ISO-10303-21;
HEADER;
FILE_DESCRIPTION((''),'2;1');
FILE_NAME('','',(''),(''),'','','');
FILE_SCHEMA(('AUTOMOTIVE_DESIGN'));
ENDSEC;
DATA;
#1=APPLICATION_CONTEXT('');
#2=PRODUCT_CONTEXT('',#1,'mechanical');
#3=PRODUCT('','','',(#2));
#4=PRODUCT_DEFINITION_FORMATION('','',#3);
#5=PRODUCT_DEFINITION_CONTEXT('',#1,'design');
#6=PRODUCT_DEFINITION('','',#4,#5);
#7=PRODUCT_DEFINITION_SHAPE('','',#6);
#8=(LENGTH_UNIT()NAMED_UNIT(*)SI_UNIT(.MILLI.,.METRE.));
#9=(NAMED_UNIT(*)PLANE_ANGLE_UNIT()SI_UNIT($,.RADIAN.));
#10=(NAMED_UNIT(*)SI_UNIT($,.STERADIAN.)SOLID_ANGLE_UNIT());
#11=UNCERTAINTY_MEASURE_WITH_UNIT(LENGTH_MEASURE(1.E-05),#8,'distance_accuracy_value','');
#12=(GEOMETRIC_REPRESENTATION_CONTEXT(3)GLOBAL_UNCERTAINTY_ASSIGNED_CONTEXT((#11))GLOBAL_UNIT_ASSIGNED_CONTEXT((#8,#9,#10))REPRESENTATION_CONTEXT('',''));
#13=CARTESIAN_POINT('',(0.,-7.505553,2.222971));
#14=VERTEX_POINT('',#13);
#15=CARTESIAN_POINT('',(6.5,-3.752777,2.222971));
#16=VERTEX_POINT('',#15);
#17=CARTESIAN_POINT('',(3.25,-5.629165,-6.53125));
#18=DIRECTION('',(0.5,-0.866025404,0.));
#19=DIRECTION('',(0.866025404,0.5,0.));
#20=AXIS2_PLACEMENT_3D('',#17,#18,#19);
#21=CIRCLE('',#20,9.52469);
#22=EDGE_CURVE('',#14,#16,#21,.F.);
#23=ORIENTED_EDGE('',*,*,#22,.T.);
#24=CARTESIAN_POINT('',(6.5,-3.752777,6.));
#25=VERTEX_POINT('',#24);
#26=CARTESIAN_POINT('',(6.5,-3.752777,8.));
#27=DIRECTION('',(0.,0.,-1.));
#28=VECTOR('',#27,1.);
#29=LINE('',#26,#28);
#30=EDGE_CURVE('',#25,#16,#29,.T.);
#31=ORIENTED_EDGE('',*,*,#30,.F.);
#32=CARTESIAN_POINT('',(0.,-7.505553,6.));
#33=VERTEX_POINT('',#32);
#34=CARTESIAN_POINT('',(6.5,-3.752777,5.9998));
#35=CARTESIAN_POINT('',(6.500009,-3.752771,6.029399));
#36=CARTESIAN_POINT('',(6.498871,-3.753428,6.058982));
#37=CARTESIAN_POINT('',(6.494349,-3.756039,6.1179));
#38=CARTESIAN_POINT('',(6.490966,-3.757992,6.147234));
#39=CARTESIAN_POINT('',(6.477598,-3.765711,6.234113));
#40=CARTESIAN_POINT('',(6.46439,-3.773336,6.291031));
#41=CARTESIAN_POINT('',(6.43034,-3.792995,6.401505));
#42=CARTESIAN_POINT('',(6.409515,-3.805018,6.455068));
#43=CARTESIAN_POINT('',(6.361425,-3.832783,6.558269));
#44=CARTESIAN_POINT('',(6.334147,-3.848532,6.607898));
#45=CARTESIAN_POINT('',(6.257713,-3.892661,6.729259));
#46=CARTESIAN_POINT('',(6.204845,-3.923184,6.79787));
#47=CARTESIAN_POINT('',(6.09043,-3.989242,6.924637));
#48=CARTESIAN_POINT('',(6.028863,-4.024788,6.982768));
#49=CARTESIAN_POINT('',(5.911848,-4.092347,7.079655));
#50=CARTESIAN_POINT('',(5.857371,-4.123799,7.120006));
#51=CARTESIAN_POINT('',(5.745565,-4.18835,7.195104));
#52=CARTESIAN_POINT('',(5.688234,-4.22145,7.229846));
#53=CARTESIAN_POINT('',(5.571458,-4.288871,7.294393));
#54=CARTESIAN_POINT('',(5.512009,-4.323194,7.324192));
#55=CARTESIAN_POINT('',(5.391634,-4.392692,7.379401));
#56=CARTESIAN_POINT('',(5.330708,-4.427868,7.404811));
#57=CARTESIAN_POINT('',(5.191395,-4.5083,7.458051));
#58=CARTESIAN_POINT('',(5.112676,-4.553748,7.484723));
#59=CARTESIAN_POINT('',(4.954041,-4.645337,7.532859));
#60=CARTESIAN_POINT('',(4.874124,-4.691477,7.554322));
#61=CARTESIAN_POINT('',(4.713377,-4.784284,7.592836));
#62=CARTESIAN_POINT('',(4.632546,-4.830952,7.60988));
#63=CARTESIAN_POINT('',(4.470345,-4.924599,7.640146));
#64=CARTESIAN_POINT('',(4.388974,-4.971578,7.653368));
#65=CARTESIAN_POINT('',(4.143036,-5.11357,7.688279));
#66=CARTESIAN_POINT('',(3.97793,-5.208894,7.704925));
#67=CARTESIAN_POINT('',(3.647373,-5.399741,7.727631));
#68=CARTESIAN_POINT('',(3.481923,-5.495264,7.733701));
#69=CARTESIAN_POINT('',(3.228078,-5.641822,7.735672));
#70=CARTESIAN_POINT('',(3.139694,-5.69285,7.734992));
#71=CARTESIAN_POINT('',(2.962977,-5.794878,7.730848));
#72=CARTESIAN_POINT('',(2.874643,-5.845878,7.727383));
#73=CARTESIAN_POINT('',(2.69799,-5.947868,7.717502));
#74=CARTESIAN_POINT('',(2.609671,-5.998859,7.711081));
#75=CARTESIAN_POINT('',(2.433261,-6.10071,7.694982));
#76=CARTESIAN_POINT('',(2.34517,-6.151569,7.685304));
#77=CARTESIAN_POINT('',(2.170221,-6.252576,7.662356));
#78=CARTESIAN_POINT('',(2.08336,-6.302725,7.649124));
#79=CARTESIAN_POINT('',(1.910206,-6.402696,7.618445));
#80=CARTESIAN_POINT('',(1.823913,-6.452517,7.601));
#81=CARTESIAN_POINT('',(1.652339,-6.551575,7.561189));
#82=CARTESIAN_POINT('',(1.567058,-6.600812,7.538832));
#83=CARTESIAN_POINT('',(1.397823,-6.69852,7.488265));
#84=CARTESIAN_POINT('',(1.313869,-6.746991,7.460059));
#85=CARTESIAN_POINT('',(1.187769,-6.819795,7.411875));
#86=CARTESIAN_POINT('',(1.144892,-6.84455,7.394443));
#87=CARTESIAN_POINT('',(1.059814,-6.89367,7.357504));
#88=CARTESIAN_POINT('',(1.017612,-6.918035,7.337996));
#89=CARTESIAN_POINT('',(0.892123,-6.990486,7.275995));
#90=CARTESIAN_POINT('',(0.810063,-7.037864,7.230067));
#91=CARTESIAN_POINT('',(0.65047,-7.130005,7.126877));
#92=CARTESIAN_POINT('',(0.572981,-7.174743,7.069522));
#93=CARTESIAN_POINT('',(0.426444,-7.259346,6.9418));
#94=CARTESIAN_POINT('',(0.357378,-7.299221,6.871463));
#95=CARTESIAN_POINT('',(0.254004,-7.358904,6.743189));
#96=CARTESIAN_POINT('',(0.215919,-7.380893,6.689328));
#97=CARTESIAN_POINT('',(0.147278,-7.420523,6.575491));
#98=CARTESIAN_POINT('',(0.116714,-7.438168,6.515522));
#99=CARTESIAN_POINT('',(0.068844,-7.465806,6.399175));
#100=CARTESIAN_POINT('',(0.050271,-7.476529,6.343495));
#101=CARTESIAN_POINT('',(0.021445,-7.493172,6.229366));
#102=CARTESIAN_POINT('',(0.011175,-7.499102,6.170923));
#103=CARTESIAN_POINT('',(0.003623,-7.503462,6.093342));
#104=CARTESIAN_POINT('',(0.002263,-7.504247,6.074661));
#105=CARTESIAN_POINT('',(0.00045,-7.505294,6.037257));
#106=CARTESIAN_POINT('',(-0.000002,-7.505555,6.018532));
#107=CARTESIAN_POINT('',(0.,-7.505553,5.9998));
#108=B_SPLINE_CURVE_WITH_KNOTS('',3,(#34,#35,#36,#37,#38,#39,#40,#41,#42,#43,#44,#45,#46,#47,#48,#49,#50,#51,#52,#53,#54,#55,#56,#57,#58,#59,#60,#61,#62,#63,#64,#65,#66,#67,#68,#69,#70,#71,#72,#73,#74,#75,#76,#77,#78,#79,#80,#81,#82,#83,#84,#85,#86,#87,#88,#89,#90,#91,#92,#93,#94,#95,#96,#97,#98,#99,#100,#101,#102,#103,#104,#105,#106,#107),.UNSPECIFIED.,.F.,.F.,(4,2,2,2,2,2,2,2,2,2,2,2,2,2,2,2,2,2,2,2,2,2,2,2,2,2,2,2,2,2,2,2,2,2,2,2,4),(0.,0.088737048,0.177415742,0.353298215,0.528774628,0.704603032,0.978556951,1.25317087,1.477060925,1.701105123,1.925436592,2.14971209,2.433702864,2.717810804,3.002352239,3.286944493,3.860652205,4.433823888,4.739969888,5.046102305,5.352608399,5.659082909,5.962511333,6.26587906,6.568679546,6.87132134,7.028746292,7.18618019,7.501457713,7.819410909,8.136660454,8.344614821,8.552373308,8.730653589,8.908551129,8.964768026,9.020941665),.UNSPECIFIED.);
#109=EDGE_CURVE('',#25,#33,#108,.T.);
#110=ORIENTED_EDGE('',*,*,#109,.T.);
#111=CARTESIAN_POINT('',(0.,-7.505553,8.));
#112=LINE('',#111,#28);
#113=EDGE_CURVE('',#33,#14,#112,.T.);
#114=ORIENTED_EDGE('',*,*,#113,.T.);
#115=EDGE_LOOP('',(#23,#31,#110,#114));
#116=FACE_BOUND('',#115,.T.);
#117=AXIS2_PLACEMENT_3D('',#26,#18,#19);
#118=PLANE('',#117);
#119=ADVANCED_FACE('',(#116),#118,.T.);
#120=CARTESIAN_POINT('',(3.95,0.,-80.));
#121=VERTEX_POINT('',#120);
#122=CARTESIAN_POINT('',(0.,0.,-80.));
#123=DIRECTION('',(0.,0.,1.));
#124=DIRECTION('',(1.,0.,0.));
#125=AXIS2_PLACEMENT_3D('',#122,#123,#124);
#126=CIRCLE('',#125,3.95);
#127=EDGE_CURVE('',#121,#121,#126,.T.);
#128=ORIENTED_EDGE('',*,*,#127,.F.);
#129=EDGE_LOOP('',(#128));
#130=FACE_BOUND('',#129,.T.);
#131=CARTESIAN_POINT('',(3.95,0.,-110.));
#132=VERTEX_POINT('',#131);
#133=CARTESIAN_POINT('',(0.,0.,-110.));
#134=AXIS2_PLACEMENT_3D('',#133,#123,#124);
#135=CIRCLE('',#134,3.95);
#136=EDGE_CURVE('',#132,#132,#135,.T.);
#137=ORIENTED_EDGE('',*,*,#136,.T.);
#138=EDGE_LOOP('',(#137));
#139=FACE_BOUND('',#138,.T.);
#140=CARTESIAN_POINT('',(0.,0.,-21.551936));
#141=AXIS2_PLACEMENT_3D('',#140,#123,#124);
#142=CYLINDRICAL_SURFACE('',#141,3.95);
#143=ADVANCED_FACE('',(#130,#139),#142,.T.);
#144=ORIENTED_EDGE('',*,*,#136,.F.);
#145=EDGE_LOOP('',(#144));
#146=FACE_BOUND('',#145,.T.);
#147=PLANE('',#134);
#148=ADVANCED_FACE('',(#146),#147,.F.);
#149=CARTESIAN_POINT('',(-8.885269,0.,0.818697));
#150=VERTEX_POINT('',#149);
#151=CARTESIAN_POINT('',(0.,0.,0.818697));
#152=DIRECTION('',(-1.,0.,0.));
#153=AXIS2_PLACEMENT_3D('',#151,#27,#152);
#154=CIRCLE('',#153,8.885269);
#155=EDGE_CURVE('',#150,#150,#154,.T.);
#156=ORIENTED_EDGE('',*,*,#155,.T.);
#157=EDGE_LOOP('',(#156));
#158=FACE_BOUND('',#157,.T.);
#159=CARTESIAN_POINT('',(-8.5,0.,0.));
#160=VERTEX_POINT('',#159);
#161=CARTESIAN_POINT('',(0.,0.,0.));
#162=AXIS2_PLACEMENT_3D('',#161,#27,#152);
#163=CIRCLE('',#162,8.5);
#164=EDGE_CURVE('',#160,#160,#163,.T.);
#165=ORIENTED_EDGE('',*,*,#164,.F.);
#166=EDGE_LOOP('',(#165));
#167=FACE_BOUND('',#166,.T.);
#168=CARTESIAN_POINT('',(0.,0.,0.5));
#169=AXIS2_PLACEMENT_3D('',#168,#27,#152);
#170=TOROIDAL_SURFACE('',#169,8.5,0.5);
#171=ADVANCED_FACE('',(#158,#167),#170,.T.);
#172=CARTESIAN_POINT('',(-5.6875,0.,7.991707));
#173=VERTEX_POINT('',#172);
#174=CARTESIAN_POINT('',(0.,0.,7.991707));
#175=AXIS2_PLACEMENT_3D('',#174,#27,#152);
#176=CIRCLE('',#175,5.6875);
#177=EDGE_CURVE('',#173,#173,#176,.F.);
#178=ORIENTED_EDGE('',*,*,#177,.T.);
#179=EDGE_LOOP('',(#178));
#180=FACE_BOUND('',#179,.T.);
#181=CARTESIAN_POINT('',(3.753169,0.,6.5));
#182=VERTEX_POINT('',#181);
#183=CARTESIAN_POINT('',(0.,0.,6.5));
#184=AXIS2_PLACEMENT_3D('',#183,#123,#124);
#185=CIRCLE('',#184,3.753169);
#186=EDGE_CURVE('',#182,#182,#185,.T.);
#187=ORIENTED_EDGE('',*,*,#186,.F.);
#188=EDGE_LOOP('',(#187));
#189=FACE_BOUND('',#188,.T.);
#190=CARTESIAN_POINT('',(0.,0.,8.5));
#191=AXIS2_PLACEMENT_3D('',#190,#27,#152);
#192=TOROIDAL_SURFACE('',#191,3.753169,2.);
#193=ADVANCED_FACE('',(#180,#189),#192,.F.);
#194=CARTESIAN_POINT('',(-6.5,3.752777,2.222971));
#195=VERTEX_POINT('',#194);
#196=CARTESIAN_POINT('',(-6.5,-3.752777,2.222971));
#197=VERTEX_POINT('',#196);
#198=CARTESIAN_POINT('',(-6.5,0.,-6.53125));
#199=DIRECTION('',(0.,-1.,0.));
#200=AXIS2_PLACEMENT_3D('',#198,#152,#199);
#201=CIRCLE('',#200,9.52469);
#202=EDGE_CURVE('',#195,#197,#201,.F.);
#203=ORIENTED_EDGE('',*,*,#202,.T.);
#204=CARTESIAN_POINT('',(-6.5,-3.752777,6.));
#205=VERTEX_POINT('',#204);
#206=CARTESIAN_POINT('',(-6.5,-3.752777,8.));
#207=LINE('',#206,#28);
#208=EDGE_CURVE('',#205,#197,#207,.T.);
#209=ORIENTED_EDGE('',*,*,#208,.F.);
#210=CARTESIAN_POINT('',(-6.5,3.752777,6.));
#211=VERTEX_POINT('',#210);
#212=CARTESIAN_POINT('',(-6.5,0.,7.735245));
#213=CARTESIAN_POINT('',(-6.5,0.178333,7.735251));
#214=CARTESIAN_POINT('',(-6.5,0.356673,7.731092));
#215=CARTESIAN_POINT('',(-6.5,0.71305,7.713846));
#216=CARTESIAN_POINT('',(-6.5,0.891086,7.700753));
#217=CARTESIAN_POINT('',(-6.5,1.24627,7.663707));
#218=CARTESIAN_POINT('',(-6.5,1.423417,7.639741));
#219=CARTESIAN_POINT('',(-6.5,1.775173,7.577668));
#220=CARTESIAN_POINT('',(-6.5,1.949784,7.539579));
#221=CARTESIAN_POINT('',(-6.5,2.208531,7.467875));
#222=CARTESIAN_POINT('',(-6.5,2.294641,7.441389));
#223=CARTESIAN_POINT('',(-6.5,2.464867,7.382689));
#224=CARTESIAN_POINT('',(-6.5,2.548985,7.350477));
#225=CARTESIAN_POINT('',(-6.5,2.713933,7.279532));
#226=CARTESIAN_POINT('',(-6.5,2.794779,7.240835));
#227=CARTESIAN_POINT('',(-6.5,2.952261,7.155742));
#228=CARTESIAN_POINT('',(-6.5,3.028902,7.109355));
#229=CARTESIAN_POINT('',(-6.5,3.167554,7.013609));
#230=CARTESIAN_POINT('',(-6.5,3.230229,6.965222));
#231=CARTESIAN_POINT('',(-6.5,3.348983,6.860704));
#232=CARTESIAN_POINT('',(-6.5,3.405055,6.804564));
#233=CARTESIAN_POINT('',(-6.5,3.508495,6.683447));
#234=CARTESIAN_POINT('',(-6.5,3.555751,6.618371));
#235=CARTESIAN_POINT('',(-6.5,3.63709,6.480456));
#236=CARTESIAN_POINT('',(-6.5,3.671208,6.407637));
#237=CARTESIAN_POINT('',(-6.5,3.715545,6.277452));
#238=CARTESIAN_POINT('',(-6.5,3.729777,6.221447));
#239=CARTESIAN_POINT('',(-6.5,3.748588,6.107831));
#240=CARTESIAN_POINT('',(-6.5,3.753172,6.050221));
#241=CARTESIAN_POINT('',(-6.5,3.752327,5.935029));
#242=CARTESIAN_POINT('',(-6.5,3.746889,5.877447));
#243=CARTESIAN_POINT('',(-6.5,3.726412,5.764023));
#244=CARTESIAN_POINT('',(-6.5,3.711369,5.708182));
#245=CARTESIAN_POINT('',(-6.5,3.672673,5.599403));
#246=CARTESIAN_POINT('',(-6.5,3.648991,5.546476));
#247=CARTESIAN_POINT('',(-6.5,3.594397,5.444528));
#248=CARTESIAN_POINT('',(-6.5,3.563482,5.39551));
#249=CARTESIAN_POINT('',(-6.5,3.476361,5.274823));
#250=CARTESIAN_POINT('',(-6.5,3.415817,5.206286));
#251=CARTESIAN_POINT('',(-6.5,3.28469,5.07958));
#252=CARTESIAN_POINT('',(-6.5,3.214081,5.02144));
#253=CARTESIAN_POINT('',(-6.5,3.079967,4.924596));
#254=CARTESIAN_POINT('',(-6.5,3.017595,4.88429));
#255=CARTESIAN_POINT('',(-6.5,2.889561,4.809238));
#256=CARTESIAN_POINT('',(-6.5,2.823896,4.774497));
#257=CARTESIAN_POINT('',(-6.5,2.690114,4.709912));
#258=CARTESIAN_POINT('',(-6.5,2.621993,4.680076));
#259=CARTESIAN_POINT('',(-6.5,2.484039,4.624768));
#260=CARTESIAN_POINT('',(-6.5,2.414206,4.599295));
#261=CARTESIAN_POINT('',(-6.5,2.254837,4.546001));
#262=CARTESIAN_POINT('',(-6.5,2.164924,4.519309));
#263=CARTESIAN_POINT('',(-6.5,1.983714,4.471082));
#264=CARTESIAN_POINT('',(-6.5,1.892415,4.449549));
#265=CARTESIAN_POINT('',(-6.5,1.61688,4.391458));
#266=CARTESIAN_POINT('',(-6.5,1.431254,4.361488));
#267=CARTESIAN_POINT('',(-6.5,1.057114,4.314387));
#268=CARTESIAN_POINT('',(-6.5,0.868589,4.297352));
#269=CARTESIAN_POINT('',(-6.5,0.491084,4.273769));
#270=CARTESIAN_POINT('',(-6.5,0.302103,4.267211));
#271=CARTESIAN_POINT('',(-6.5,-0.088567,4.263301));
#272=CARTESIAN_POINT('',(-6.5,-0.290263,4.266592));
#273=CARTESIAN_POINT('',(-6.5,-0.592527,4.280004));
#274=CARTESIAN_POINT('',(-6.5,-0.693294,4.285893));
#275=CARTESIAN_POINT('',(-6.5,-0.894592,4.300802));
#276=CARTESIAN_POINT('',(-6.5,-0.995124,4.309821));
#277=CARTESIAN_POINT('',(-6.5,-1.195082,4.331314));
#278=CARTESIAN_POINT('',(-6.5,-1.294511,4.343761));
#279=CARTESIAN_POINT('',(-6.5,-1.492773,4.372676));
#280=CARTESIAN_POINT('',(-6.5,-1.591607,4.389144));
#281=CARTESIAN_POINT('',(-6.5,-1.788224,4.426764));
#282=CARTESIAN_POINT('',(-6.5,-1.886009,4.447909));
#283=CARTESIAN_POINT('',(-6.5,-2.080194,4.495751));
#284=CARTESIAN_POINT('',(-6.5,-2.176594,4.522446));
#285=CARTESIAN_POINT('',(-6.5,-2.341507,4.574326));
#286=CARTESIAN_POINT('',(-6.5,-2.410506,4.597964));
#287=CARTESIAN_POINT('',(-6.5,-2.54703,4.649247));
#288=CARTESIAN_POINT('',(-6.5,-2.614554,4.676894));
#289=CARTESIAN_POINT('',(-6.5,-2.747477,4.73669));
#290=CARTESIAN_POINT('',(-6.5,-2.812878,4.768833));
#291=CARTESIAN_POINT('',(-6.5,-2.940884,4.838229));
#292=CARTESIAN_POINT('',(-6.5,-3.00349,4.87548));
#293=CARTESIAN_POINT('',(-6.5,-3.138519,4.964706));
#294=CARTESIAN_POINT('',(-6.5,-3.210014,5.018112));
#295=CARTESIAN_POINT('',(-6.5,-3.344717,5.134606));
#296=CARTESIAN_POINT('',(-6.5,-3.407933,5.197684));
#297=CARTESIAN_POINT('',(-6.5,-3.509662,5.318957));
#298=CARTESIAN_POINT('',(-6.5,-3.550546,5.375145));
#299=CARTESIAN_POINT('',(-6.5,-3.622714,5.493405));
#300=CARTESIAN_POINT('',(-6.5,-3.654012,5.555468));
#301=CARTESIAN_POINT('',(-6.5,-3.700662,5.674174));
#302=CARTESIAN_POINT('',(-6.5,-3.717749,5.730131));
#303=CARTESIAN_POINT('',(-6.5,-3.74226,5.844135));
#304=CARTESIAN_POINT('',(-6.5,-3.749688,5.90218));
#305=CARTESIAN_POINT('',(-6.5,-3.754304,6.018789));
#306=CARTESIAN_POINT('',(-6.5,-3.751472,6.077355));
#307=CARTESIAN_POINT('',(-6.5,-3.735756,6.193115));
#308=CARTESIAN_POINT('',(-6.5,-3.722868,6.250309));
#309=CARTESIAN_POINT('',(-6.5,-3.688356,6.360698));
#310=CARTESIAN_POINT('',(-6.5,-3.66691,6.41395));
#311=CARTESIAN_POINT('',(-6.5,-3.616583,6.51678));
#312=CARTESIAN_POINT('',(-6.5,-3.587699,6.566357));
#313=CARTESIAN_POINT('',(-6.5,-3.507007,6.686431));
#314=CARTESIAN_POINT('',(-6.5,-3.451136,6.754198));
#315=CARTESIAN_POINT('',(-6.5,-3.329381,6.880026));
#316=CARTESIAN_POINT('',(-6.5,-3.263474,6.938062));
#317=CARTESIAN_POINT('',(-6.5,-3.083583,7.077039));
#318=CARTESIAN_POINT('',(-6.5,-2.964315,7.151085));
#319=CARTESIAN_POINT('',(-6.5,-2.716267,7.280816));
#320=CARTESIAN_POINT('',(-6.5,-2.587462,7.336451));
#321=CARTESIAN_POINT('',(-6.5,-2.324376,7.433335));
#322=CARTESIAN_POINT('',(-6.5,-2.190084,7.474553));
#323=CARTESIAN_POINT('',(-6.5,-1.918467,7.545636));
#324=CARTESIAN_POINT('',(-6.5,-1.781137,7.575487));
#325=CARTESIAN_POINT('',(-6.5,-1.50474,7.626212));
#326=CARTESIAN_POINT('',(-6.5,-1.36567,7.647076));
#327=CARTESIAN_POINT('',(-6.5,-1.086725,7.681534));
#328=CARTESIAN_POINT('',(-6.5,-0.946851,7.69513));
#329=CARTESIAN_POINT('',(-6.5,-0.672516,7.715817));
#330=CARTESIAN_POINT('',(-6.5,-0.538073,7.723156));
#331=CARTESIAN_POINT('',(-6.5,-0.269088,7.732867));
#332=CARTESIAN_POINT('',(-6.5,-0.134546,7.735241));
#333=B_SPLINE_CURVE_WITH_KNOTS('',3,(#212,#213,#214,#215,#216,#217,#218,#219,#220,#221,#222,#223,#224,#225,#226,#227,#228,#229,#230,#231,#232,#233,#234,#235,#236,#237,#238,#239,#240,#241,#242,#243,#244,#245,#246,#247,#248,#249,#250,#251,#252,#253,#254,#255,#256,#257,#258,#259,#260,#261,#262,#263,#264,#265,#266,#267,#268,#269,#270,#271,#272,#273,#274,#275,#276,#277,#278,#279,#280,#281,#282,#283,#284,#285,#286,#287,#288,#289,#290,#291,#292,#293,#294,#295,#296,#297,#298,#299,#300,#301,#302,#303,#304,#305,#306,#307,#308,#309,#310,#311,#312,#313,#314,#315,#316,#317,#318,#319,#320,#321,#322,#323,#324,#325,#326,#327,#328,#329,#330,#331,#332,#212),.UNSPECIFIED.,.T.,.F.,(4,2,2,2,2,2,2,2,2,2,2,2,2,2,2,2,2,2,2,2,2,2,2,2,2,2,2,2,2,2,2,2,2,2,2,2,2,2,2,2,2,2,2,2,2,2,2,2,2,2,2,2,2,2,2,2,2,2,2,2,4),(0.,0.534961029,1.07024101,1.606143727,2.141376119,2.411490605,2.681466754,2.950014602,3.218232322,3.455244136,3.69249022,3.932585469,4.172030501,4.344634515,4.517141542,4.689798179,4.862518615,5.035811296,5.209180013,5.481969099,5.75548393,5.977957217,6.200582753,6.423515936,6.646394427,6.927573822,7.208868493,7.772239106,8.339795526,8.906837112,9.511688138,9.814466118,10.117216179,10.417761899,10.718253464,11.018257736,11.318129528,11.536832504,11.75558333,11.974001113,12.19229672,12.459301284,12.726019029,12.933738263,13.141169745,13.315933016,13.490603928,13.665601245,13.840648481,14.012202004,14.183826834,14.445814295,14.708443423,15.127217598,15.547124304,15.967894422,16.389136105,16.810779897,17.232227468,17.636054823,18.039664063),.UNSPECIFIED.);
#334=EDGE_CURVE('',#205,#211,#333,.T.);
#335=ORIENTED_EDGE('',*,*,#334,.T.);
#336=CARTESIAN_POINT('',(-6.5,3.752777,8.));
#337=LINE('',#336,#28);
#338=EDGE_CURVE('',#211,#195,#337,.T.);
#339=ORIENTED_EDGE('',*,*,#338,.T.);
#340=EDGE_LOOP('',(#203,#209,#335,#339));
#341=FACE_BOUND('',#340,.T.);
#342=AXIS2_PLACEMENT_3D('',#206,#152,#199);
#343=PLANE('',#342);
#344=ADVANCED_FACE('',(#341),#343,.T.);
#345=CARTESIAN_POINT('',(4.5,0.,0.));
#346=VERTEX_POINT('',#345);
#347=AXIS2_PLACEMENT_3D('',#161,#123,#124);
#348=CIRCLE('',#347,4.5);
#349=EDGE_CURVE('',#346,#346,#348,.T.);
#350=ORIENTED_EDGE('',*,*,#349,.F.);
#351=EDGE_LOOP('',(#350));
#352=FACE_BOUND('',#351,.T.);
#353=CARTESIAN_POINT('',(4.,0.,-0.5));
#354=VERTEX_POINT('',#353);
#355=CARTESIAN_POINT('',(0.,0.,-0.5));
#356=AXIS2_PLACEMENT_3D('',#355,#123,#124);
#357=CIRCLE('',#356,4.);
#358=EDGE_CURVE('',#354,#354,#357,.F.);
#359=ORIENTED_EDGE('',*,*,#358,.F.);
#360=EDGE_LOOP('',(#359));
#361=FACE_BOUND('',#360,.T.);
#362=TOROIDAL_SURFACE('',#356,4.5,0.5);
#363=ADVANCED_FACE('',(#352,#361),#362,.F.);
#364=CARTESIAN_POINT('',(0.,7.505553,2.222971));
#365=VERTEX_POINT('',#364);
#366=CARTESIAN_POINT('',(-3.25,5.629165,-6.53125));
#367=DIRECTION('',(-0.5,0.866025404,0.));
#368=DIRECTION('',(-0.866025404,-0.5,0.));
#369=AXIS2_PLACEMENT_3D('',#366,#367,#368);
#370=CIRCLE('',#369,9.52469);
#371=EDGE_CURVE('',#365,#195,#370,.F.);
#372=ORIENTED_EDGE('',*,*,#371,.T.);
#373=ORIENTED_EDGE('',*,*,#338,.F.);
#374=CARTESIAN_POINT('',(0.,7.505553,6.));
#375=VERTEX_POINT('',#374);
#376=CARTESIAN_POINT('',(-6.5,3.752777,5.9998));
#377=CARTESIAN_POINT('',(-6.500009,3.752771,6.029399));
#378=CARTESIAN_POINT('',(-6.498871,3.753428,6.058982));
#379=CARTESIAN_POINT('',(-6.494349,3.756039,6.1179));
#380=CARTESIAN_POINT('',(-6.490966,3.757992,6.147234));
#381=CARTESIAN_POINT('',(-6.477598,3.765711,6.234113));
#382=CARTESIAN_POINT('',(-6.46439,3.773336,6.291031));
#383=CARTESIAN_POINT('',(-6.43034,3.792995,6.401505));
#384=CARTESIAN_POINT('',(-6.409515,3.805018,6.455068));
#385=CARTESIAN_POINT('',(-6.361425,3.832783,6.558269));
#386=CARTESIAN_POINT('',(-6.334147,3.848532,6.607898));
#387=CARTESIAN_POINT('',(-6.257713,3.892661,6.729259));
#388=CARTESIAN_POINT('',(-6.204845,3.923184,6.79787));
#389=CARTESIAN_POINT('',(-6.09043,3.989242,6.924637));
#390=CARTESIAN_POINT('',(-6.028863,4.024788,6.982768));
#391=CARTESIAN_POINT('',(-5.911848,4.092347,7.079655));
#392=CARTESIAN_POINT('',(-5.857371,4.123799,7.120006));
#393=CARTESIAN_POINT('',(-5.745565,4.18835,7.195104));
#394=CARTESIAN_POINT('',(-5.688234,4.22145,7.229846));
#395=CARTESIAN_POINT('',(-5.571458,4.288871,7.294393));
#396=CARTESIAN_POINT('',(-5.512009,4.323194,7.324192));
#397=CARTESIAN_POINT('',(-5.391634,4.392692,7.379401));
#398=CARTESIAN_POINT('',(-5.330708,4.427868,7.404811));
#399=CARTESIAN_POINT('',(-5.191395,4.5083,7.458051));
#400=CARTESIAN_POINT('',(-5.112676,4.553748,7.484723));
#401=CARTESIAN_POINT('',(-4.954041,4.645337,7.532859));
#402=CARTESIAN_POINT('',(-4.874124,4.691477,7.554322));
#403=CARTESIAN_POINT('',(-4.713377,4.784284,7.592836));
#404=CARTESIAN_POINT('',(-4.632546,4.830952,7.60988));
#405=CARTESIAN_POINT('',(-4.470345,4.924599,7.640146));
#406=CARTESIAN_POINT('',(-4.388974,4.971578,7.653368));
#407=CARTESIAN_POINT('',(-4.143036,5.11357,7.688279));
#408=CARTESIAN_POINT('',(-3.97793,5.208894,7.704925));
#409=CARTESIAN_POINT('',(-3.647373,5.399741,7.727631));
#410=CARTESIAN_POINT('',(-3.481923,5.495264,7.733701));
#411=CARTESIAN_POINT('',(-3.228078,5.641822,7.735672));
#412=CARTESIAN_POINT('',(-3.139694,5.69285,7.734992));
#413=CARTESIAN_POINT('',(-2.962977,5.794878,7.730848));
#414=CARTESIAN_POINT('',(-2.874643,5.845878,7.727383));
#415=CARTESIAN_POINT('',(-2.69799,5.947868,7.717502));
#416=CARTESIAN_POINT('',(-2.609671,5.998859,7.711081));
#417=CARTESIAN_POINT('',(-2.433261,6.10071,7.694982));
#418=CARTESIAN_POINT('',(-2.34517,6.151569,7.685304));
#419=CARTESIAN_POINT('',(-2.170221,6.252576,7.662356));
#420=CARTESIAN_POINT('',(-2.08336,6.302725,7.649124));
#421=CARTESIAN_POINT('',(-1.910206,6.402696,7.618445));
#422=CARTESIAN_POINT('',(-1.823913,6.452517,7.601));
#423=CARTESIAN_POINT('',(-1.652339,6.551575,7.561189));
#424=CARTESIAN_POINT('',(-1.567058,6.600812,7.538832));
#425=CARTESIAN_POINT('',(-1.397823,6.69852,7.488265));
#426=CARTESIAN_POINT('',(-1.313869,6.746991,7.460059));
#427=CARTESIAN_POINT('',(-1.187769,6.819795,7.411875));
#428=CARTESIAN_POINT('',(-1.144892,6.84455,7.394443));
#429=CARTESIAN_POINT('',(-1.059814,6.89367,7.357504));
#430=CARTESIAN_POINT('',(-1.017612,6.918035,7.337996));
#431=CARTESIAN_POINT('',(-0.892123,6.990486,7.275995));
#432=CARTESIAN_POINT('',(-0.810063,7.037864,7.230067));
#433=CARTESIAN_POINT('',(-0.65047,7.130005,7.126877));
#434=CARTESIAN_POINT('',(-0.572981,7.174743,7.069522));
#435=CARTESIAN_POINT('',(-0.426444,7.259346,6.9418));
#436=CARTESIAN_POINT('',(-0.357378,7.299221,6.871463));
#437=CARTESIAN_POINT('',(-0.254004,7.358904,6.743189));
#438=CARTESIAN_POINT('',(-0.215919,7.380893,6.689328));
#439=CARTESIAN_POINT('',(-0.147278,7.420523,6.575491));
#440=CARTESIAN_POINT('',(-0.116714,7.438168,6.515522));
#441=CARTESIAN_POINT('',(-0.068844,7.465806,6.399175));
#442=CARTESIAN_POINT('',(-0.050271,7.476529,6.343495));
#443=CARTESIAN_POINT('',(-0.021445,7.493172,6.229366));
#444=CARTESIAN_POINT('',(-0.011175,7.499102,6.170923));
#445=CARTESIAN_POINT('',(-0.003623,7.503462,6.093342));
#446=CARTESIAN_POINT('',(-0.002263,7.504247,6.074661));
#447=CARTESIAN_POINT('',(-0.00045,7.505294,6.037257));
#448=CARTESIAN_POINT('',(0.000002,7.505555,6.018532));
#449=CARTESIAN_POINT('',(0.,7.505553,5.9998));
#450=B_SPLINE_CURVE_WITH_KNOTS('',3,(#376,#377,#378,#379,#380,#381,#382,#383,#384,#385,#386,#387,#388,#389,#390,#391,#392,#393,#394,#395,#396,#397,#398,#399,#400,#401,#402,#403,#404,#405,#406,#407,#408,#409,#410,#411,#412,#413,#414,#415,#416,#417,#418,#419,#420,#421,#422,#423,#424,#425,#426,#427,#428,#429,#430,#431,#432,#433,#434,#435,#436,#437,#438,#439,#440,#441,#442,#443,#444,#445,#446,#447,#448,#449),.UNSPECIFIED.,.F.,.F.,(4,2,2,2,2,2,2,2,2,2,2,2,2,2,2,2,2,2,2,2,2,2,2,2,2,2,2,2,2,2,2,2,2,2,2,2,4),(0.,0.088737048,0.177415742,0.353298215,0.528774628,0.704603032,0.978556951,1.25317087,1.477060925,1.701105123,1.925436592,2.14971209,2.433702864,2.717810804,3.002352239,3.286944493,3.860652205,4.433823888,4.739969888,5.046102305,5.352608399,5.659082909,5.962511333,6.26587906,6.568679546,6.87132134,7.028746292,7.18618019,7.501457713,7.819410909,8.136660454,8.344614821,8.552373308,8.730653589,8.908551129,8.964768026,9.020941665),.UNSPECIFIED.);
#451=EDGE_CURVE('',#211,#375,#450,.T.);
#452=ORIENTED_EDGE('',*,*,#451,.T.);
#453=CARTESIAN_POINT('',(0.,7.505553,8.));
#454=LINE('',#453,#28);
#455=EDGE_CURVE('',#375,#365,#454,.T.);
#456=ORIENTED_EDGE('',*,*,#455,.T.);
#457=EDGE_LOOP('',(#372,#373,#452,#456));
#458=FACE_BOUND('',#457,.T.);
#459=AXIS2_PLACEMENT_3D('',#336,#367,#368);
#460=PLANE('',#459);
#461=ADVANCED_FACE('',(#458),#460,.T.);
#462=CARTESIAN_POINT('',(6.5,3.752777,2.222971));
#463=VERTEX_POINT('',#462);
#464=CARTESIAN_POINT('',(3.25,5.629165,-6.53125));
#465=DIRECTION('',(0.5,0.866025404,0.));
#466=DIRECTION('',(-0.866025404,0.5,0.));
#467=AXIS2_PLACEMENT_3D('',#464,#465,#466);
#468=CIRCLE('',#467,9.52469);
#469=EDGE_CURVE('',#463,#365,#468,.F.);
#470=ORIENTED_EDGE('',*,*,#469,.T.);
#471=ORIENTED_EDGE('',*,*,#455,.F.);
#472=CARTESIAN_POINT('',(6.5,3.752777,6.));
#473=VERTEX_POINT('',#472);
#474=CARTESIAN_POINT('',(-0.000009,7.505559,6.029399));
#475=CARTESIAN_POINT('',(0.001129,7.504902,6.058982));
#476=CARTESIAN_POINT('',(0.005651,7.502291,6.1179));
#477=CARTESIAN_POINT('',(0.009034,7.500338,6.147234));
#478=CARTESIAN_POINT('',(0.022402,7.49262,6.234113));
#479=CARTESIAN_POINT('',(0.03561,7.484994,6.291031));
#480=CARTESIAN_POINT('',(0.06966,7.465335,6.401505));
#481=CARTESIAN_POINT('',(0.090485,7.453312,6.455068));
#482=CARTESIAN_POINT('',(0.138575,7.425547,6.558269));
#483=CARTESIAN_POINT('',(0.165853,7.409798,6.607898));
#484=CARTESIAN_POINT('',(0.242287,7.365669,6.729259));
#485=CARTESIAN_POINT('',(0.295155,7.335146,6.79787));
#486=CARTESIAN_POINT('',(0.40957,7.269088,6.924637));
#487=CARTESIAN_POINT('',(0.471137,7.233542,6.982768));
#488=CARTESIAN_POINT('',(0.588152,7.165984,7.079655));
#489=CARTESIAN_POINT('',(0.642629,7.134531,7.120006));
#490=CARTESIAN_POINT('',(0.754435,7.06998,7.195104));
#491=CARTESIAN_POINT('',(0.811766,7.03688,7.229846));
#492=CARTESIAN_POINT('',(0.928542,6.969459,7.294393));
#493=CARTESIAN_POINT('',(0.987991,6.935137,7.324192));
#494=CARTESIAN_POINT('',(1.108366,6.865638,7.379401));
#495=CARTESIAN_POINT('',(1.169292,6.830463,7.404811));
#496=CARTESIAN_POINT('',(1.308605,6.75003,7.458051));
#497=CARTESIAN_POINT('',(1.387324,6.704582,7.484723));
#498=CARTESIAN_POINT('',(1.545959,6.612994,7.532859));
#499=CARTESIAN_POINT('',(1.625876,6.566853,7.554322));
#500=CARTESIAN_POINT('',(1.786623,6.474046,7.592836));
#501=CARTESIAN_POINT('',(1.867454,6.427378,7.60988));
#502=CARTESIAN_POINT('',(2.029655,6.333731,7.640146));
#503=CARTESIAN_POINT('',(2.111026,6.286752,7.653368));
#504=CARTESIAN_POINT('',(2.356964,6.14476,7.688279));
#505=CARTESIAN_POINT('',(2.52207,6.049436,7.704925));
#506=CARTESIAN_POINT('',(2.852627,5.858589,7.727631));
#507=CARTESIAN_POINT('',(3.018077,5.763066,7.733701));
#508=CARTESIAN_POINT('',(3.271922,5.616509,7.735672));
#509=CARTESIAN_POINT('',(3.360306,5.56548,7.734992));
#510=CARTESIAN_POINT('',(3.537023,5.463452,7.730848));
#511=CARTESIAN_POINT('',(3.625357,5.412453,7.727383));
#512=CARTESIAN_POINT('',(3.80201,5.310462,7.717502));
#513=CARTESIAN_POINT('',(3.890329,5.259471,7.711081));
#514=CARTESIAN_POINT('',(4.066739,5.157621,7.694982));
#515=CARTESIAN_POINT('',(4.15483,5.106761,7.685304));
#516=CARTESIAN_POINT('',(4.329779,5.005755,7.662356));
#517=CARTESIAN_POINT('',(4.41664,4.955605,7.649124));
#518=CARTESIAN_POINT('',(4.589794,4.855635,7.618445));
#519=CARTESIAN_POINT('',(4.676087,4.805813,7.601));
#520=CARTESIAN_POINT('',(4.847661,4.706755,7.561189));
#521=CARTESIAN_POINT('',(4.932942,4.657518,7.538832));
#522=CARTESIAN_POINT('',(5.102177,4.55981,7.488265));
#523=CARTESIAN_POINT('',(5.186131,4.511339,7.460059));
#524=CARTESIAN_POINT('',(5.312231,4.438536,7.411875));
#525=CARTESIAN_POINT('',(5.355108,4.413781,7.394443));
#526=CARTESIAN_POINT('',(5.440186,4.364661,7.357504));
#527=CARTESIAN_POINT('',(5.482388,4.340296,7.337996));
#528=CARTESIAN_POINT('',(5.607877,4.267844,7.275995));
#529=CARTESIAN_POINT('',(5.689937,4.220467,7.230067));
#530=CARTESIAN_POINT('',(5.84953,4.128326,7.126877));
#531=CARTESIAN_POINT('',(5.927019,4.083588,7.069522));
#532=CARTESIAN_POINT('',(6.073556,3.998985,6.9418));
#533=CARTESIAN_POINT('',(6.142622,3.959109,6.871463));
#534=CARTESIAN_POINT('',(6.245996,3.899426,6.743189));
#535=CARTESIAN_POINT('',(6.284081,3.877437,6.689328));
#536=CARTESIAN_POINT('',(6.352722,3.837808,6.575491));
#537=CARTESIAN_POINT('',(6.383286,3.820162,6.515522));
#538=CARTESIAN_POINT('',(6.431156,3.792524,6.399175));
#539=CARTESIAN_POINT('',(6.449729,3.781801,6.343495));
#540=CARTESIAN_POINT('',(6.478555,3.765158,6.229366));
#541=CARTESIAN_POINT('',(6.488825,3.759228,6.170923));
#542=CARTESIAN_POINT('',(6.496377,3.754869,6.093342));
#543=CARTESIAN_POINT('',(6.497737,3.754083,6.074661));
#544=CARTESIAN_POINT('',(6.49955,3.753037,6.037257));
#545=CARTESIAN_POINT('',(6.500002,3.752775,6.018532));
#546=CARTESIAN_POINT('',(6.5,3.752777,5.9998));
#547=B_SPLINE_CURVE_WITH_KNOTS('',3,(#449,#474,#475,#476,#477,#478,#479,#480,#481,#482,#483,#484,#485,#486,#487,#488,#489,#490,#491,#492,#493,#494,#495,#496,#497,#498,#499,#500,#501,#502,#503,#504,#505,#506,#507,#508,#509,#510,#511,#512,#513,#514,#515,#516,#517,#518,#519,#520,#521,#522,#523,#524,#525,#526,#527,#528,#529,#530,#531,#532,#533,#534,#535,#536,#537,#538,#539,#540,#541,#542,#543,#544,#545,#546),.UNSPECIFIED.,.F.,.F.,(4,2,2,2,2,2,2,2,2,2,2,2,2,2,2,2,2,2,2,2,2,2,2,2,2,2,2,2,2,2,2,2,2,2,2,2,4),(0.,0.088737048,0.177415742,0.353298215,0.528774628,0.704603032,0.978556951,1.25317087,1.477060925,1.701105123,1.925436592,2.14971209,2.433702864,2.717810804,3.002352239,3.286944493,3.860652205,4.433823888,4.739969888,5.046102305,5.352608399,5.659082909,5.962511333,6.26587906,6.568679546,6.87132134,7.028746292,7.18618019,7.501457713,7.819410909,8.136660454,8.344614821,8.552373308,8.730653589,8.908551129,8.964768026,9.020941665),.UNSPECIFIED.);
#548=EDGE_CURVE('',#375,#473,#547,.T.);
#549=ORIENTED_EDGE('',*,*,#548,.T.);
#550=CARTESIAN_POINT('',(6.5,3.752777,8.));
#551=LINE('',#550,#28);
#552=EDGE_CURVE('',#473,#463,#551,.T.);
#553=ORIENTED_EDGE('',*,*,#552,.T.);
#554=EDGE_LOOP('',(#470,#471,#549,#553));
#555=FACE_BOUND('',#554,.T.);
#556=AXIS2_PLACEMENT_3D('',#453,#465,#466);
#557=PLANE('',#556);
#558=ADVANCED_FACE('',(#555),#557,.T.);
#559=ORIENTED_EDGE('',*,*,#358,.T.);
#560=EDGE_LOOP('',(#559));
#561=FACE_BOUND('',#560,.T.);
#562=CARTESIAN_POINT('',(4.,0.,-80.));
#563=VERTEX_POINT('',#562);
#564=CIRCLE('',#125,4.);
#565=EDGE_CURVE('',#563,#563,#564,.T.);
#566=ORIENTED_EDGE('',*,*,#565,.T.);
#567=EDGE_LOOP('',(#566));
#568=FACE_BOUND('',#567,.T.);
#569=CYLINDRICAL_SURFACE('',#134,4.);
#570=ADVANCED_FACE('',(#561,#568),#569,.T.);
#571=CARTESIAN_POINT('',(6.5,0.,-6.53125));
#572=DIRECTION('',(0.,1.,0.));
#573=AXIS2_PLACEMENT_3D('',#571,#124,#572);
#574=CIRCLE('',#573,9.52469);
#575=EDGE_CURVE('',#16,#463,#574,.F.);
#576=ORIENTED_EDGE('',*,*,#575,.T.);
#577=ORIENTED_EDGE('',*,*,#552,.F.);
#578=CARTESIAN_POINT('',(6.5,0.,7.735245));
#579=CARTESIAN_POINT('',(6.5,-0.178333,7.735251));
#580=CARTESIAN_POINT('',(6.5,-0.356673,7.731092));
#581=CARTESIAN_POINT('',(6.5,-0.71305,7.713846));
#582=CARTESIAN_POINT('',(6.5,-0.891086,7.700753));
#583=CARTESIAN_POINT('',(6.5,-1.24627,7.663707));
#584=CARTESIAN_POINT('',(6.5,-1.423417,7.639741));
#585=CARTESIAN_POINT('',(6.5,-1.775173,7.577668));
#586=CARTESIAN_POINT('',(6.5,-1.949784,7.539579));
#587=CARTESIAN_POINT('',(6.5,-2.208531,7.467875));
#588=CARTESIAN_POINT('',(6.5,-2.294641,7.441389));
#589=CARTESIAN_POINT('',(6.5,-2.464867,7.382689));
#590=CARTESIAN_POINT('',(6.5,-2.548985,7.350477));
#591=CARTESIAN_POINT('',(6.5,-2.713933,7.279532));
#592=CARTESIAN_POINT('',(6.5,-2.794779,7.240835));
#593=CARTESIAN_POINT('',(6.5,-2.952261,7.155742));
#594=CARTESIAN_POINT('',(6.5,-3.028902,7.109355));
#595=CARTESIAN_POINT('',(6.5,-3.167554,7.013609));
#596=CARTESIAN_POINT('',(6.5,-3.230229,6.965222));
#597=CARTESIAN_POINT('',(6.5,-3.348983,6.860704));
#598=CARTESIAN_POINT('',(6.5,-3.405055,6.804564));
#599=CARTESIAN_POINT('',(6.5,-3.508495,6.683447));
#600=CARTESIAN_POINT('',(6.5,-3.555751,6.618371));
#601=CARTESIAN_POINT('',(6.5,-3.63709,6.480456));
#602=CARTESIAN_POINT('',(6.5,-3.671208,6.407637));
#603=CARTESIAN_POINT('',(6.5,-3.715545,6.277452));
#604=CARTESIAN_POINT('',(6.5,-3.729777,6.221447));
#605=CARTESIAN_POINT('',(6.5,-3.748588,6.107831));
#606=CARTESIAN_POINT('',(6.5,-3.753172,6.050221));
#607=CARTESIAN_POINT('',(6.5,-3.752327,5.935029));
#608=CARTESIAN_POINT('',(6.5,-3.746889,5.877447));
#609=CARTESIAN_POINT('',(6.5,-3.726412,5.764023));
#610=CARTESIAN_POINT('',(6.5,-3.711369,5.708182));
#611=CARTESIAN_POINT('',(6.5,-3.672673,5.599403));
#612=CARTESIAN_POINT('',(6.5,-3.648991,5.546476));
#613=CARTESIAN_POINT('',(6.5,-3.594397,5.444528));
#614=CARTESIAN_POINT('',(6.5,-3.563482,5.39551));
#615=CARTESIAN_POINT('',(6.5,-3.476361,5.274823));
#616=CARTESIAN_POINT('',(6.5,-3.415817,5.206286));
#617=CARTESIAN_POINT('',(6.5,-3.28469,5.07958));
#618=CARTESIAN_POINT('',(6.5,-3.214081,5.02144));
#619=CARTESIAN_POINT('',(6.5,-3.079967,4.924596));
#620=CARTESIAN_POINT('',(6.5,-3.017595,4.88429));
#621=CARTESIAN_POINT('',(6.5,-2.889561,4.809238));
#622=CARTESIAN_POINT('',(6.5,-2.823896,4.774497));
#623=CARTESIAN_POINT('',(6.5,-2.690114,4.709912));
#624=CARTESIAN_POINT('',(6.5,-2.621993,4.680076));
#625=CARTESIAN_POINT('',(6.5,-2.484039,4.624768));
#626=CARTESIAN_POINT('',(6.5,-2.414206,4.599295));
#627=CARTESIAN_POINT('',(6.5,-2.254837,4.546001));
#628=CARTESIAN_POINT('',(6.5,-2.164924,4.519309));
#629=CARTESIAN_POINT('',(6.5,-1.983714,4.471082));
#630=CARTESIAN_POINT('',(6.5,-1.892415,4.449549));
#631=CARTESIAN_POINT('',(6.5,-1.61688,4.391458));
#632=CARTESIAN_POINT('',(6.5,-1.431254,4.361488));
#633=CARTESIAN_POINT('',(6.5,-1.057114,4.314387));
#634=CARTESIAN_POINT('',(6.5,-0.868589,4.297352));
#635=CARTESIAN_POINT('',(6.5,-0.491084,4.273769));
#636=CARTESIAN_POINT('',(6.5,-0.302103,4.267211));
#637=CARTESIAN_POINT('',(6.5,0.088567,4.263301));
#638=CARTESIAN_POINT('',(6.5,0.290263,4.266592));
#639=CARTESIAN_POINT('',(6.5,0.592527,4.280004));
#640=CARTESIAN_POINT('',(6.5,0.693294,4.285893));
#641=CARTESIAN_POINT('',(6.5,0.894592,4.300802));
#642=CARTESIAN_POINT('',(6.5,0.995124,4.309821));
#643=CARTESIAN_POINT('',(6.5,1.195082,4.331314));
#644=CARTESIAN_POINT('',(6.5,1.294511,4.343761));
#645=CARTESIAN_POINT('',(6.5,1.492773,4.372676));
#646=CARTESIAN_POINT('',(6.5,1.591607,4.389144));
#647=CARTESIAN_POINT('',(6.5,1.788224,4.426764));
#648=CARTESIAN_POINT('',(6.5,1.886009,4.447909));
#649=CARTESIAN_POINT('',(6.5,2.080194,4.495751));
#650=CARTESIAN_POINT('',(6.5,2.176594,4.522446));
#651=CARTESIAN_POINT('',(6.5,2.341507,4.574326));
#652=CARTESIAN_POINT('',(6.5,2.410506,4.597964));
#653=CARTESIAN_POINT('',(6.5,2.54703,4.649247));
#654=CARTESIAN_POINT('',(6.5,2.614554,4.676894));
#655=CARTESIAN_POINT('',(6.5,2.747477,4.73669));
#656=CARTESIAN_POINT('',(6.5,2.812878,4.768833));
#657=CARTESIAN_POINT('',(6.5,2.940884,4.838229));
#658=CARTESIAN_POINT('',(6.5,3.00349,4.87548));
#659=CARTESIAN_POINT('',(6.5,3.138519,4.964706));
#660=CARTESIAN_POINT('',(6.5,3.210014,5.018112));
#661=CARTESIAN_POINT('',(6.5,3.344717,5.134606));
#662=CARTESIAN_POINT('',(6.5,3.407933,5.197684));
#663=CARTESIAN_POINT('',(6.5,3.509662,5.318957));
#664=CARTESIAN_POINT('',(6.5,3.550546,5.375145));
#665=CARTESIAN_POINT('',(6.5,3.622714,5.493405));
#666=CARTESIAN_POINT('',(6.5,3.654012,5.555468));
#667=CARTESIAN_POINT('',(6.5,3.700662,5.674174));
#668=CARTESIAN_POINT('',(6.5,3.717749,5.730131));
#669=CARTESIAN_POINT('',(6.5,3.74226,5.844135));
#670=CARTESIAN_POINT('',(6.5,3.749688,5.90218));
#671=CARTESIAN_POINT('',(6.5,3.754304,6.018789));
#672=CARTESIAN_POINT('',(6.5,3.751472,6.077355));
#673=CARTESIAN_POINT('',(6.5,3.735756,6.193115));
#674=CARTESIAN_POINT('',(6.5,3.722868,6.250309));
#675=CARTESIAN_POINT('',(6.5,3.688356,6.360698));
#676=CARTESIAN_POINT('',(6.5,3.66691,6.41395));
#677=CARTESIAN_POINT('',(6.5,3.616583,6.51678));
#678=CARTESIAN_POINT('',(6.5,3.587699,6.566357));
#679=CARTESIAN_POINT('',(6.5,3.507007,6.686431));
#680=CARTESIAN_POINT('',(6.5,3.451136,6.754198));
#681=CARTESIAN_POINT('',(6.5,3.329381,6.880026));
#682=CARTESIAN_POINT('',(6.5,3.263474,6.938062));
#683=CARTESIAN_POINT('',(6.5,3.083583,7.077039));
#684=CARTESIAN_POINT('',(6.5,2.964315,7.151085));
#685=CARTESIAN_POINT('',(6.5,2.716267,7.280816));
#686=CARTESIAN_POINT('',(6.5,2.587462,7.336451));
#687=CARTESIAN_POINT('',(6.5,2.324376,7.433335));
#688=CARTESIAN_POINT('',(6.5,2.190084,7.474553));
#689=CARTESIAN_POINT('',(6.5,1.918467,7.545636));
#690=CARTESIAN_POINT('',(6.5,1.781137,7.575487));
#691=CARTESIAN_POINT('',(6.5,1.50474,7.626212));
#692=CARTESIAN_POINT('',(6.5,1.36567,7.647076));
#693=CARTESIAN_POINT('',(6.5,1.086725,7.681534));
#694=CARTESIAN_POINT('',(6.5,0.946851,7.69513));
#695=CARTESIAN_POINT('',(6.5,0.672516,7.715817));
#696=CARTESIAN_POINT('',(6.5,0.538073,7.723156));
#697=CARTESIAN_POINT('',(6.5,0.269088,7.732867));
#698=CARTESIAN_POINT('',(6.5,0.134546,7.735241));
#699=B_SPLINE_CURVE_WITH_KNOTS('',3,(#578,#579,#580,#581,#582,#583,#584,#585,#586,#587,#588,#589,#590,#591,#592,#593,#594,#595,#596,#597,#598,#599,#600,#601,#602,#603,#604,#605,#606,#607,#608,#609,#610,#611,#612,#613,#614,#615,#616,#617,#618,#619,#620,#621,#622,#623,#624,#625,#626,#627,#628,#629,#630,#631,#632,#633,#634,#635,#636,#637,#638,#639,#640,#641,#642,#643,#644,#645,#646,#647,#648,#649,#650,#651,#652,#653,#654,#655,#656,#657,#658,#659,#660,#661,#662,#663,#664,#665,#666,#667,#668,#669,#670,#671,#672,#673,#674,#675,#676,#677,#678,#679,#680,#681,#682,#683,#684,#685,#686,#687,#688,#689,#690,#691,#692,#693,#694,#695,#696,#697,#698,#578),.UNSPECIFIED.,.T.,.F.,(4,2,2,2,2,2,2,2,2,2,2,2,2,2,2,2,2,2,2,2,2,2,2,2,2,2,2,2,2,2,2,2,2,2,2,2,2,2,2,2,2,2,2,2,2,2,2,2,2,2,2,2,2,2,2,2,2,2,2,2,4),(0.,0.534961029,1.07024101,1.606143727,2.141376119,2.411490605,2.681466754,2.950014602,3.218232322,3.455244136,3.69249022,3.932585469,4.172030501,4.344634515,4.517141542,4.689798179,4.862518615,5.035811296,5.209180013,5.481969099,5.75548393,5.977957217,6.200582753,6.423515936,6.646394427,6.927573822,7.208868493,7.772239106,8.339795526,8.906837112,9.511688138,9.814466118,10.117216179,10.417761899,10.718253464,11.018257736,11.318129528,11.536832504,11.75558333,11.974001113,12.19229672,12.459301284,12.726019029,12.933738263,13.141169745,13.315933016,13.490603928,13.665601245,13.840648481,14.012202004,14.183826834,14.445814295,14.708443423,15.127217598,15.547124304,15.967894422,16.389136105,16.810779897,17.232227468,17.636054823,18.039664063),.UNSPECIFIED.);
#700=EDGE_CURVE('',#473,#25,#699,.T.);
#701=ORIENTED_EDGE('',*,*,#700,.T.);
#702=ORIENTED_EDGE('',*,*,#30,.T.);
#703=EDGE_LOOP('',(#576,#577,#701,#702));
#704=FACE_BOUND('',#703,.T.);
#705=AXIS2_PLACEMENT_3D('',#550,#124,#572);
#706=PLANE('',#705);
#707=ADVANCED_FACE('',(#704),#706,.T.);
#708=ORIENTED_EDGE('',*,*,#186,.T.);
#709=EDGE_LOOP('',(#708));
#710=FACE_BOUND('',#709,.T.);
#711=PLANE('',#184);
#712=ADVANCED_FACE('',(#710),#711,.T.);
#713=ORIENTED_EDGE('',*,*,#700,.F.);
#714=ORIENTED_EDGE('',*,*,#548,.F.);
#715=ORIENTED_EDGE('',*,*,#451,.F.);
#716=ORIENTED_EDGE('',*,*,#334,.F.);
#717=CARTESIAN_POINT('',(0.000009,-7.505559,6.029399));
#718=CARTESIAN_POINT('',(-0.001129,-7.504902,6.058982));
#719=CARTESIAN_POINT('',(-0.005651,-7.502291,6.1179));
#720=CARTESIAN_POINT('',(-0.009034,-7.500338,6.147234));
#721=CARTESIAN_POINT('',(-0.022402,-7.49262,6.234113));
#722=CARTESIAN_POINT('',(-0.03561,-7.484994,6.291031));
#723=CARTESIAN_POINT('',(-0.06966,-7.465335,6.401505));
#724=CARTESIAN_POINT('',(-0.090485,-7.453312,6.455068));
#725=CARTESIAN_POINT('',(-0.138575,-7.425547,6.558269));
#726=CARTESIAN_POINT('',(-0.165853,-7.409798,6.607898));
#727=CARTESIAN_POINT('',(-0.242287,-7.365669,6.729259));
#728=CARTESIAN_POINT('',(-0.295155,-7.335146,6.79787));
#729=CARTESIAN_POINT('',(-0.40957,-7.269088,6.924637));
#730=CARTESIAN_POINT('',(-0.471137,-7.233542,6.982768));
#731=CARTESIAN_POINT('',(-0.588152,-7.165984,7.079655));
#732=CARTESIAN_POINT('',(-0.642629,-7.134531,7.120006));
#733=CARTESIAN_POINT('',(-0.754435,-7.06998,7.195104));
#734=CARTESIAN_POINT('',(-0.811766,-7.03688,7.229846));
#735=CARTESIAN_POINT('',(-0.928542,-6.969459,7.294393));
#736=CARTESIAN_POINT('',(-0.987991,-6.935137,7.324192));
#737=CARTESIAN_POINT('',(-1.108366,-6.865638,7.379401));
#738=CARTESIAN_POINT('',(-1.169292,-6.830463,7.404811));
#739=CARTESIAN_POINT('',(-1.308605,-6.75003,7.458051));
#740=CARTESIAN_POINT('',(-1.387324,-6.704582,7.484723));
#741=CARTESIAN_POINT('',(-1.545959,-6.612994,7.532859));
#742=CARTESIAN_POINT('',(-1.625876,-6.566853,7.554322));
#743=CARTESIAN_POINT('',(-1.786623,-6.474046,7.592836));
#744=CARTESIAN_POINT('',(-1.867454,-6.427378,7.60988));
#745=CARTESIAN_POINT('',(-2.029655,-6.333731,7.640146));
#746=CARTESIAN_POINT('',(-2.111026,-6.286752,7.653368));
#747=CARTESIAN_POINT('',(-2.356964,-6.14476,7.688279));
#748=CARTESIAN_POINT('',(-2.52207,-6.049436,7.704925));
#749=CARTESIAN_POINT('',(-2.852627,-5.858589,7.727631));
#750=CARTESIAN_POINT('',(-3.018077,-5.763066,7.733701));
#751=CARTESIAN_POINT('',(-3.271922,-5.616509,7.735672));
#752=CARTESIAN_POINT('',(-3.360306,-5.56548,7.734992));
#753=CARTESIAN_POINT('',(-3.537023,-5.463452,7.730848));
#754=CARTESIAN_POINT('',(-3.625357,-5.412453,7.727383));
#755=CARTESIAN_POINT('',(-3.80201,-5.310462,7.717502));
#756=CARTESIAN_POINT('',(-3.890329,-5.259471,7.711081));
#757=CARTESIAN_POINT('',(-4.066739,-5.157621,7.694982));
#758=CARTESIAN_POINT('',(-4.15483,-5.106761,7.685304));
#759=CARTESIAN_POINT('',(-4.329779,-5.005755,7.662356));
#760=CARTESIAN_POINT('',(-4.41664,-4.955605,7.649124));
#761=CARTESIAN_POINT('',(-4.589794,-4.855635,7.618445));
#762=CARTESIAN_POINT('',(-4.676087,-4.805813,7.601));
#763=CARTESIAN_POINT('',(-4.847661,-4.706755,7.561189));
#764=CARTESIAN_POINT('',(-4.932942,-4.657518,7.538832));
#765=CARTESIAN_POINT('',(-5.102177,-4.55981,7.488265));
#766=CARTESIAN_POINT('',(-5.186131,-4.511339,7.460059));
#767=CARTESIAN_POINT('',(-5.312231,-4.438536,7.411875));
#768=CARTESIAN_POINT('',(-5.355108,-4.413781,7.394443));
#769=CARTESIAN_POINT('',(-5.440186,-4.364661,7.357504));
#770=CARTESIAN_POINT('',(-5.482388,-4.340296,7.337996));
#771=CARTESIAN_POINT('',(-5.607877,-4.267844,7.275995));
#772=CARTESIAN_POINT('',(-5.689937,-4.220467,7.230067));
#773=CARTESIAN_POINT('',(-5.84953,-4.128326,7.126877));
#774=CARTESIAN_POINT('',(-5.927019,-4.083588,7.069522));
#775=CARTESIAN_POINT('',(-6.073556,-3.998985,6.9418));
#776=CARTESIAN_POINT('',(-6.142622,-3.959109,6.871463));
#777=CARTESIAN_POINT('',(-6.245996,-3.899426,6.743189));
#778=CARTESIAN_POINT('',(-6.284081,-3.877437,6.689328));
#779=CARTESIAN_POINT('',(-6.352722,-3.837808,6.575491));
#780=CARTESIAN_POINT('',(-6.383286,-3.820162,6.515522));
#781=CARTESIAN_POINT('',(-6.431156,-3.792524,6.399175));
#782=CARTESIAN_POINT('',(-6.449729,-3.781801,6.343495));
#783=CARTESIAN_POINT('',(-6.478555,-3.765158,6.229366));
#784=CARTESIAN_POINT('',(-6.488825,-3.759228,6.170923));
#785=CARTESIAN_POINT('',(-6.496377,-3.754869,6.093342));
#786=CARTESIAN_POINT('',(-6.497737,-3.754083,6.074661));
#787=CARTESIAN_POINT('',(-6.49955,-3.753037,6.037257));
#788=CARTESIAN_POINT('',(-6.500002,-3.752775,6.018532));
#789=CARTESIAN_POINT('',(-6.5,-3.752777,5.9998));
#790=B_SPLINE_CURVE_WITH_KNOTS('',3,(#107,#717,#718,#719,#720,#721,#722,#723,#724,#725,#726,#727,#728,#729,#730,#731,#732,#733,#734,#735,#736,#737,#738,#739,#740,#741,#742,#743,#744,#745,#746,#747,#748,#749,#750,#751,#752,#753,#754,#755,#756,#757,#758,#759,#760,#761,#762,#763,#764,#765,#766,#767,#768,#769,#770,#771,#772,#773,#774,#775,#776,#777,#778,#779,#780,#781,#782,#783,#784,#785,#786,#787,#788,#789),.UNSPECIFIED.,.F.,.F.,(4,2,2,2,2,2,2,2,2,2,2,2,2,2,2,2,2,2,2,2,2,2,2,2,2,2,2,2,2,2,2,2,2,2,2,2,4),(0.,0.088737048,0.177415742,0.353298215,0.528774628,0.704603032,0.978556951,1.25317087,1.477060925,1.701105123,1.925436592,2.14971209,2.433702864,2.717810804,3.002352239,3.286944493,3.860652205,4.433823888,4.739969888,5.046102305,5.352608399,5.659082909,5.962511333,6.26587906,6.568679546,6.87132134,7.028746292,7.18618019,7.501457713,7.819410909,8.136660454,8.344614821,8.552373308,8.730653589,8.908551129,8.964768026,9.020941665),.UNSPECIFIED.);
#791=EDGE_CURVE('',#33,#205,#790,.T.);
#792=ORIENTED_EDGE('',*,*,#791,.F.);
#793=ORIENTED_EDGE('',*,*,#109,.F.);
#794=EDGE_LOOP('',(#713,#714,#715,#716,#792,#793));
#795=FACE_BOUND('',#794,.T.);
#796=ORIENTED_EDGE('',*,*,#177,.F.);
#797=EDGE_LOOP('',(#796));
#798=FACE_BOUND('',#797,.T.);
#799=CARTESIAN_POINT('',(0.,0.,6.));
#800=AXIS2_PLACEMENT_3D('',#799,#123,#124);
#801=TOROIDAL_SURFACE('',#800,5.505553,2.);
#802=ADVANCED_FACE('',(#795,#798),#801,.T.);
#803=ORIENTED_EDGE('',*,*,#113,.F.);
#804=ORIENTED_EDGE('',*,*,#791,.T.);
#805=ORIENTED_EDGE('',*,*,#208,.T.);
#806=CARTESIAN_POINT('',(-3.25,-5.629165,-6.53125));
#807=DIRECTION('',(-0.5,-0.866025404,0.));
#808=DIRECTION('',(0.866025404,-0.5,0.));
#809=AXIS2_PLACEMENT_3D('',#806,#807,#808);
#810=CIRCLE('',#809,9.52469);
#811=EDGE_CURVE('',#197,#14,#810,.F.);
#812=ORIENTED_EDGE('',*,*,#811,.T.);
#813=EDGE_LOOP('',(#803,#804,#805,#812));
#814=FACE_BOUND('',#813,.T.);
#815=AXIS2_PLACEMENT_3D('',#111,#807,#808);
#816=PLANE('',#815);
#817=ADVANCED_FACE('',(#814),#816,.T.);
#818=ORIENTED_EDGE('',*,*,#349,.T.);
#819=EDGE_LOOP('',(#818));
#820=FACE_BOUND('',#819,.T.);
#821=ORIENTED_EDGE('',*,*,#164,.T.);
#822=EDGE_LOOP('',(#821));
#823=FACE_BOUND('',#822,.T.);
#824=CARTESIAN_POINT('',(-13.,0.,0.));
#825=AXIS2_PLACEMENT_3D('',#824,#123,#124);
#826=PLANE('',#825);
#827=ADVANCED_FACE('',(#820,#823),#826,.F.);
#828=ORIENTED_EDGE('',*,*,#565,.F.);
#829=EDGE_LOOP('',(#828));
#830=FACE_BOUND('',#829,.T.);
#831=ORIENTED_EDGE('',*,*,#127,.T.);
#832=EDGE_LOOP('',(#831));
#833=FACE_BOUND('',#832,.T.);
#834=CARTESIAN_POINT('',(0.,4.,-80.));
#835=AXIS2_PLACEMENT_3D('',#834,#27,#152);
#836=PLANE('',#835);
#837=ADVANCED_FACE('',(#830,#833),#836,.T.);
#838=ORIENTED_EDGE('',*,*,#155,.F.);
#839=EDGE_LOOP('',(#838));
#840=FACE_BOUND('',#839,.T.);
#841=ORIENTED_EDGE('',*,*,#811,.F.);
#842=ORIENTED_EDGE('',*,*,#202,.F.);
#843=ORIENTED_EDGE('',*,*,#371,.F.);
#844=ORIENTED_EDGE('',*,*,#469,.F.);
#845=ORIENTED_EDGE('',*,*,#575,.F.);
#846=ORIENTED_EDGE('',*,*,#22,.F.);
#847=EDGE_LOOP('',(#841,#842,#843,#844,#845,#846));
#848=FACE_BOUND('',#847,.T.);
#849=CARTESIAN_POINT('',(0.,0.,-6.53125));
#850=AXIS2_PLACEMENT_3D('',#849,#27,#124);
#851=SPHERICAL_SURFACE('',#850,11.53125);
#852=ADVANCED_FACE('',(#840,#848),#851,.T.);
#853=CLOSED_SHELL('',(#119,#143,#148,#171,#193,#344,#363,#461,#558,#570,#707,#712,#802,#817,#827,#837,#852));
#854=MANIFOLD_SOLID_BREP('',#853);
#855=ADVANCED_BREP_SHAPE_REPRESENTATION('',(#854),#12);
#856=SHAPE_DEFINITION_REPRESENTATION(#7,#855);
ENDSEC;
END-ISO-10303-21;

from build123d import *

# Parameters (mm, degrees)
HEAD_DEPTH     = 8
SHANK_SKETCH_R = 4
SHANK_DEPTH    = 110
SKETCH6_R      = 5.6875
HEAD_CUT_DEPTH = 1.5
FILLET1_R      = 2
FILLET2_R      = 0.5
THREAD_END_W   = 30
THREAD_END_H   = 0.05


with BuildPart() as part:
    # Head Sketch → Head (new body)
    with BuildSketch(Plane.XY):
        Polygon((0, 7.505553499), (6.5, 3.75277675), (6.5, -3.75277675), (0, -7.505553499), (-6.5, -3.75277675), (-6.5, 3.75277675), align=None)
    extrude(amount=HEAD_DEPTH)

    # Shank Sketch → Shank (add)
    with BuildSketch(Plane.XY):
        Circle(SHANK_SKETCH_R)
    extrude(amount=-SHANK_DEPTH)

    # Sketch3 → Flange (revolve)
    with BuildSketch(Plane(origin=(0, 0, 0), x_dir=(-1, 0, 0), z_dir=(0, 1, 0)), mode=Mode.PRIVATE) as flange_sk:
        with BuildLine():
            Line((-8.5, 0), (0, 0))
            Line((0, 0), (0, 5))
            ThreePointArc((0, 5), (-4.909972075, 3.90244066), (-8.885269122, 0.818696884))
            ThreePointArc((-8.885269122, 0.818696884), (-8.952409351, 0.287101482), (-8.5, 0))
        make_face()
    revolve(flange_sk.sketch.rotate(Axis((0, 0, 0), (0, 0, 1)), 30), axis=Axis((0, 0, 0), (0, 0, 1)))

    # Sketch5 → Head Trim (revolve, cut)
    with BuildSketch(Plane(origin=(0, 0, 0), x_dir=(0, 0, -1), z_dir=(1, 0, 0)), mode=Mode.PRIVATE) as head_trim_sk:
        with BuildLine():
            Line((-8, -5.505553499), (-8, -7.505553499))
            Line((-8, -7.505553499), (-6, -7.505553499))
            ThreePointArc((-6, -7.505553499), (-7.414213562, -6.919767062), (-8, -5.505553499))
        make_face()
    revolve(head_trim_sk.sketch.rotate(Axis((0, 0, 15.085599173), (0, 0, -1)), 90), axis=Axis((0, 0, 15.085599173), (0, 0, -1)), mode=Mode.SUBTRACT)

    # Sketch6 → Head Cut (cut)
    with BuildSketch(Plane.XY.offset(8)):
        Circle(SKETCH6_R)
    extrude(amount=-HEAD_CUT_DEPTH, mode=Mode.SUBTRACT)

    # Fillet1
    # the kernel refuses this fillet: 2 mm, written as the material it adds along each edge
    with BuildSketch(Plane(origin=(0, 0, 6.5), x_dir=(1, 0, 0), z_dir=(0, -1, 0))) as fillet1_piece_1:
        with BuildLine():
            CenterArc((3.753168618, 2), FILLET1_R, 270, 75.276973149)
            Line((3.753168618, 0), (3.753168618, -0.04))
            Line((3.753168618, -0.04), (5.6875, -0.04))
            Line((5.6875, -0.04), (5.7275, 0))
            ThreePointArc((5.7275, 0), (5.7275, 0.745853336), (5.726186628, 1.481540806))
            Line((5.726186628, 1.481540806), (5.6875, 1.491706673))
        make_face()
    revolve(axis=Axis((0, 0, 6.5), (0, 0, 1)), revolution_arc=180.000000894)
    with BuildSketch(Plane(origin=(0, 0, 6.5), x_dir=(-0.9999999999999999, -1.560445893577358e-08, 0), z_dir=(-1.560445893577358e-08, 0.9999999999999999, 0))) as fillet1_piece_2:
        with BuildLine():
            CenterArc((3.753168618, 2), FILLET1_R, 270, 75.276973149)
            Line((3.753168618, 0), (3.753168618, -0.04))
            Line((3.753168618, -0.04), (5.6875, -0.04))
            Line((5.6875, -0.04), (5.7275, 0))
            ThreePointArc((5.7275, 0), (5.7275, 0.745853336), (5.726186628, 1.481540806))
            Line((5.726186628, 1.481540806), (5.6875, 1.491706673))
        make_face()
    revolve(axis=Axis((0, 0, 6.5), (0, 0, 1)), revolution_arc=179.999999106)

    # Fillet2
    fillet2_edges = [part.edges().sort_by_distance(p)[0] for p in [
        (-4, 0, 0),
    ]]
    fillet(fillet2_edges, radius=FILLET2_R)

    # Thread End → Thread Cut (revolve, cut)
    with BuildSketch(Plane(origin=(0, 0, 0), x_dir=(0, 0, -1), z_dir=(1, 0, 0)), mode=Mode.PRIVATE) as thread_cut_sk:
        with Locations((95, 3.975)):
            Rectangle(THREAD_END_W, THREAD_END_H)
    revolve(thread_cut_sk.sketch.rotate(Axis((0, 0, -21.551935625), (0, 0, -1)), 60.000022404), axis=Axis((0, 0, -21.551935625), (0, 0, -1)), mode=Mode.SUBTRACT)


solid = part.part
